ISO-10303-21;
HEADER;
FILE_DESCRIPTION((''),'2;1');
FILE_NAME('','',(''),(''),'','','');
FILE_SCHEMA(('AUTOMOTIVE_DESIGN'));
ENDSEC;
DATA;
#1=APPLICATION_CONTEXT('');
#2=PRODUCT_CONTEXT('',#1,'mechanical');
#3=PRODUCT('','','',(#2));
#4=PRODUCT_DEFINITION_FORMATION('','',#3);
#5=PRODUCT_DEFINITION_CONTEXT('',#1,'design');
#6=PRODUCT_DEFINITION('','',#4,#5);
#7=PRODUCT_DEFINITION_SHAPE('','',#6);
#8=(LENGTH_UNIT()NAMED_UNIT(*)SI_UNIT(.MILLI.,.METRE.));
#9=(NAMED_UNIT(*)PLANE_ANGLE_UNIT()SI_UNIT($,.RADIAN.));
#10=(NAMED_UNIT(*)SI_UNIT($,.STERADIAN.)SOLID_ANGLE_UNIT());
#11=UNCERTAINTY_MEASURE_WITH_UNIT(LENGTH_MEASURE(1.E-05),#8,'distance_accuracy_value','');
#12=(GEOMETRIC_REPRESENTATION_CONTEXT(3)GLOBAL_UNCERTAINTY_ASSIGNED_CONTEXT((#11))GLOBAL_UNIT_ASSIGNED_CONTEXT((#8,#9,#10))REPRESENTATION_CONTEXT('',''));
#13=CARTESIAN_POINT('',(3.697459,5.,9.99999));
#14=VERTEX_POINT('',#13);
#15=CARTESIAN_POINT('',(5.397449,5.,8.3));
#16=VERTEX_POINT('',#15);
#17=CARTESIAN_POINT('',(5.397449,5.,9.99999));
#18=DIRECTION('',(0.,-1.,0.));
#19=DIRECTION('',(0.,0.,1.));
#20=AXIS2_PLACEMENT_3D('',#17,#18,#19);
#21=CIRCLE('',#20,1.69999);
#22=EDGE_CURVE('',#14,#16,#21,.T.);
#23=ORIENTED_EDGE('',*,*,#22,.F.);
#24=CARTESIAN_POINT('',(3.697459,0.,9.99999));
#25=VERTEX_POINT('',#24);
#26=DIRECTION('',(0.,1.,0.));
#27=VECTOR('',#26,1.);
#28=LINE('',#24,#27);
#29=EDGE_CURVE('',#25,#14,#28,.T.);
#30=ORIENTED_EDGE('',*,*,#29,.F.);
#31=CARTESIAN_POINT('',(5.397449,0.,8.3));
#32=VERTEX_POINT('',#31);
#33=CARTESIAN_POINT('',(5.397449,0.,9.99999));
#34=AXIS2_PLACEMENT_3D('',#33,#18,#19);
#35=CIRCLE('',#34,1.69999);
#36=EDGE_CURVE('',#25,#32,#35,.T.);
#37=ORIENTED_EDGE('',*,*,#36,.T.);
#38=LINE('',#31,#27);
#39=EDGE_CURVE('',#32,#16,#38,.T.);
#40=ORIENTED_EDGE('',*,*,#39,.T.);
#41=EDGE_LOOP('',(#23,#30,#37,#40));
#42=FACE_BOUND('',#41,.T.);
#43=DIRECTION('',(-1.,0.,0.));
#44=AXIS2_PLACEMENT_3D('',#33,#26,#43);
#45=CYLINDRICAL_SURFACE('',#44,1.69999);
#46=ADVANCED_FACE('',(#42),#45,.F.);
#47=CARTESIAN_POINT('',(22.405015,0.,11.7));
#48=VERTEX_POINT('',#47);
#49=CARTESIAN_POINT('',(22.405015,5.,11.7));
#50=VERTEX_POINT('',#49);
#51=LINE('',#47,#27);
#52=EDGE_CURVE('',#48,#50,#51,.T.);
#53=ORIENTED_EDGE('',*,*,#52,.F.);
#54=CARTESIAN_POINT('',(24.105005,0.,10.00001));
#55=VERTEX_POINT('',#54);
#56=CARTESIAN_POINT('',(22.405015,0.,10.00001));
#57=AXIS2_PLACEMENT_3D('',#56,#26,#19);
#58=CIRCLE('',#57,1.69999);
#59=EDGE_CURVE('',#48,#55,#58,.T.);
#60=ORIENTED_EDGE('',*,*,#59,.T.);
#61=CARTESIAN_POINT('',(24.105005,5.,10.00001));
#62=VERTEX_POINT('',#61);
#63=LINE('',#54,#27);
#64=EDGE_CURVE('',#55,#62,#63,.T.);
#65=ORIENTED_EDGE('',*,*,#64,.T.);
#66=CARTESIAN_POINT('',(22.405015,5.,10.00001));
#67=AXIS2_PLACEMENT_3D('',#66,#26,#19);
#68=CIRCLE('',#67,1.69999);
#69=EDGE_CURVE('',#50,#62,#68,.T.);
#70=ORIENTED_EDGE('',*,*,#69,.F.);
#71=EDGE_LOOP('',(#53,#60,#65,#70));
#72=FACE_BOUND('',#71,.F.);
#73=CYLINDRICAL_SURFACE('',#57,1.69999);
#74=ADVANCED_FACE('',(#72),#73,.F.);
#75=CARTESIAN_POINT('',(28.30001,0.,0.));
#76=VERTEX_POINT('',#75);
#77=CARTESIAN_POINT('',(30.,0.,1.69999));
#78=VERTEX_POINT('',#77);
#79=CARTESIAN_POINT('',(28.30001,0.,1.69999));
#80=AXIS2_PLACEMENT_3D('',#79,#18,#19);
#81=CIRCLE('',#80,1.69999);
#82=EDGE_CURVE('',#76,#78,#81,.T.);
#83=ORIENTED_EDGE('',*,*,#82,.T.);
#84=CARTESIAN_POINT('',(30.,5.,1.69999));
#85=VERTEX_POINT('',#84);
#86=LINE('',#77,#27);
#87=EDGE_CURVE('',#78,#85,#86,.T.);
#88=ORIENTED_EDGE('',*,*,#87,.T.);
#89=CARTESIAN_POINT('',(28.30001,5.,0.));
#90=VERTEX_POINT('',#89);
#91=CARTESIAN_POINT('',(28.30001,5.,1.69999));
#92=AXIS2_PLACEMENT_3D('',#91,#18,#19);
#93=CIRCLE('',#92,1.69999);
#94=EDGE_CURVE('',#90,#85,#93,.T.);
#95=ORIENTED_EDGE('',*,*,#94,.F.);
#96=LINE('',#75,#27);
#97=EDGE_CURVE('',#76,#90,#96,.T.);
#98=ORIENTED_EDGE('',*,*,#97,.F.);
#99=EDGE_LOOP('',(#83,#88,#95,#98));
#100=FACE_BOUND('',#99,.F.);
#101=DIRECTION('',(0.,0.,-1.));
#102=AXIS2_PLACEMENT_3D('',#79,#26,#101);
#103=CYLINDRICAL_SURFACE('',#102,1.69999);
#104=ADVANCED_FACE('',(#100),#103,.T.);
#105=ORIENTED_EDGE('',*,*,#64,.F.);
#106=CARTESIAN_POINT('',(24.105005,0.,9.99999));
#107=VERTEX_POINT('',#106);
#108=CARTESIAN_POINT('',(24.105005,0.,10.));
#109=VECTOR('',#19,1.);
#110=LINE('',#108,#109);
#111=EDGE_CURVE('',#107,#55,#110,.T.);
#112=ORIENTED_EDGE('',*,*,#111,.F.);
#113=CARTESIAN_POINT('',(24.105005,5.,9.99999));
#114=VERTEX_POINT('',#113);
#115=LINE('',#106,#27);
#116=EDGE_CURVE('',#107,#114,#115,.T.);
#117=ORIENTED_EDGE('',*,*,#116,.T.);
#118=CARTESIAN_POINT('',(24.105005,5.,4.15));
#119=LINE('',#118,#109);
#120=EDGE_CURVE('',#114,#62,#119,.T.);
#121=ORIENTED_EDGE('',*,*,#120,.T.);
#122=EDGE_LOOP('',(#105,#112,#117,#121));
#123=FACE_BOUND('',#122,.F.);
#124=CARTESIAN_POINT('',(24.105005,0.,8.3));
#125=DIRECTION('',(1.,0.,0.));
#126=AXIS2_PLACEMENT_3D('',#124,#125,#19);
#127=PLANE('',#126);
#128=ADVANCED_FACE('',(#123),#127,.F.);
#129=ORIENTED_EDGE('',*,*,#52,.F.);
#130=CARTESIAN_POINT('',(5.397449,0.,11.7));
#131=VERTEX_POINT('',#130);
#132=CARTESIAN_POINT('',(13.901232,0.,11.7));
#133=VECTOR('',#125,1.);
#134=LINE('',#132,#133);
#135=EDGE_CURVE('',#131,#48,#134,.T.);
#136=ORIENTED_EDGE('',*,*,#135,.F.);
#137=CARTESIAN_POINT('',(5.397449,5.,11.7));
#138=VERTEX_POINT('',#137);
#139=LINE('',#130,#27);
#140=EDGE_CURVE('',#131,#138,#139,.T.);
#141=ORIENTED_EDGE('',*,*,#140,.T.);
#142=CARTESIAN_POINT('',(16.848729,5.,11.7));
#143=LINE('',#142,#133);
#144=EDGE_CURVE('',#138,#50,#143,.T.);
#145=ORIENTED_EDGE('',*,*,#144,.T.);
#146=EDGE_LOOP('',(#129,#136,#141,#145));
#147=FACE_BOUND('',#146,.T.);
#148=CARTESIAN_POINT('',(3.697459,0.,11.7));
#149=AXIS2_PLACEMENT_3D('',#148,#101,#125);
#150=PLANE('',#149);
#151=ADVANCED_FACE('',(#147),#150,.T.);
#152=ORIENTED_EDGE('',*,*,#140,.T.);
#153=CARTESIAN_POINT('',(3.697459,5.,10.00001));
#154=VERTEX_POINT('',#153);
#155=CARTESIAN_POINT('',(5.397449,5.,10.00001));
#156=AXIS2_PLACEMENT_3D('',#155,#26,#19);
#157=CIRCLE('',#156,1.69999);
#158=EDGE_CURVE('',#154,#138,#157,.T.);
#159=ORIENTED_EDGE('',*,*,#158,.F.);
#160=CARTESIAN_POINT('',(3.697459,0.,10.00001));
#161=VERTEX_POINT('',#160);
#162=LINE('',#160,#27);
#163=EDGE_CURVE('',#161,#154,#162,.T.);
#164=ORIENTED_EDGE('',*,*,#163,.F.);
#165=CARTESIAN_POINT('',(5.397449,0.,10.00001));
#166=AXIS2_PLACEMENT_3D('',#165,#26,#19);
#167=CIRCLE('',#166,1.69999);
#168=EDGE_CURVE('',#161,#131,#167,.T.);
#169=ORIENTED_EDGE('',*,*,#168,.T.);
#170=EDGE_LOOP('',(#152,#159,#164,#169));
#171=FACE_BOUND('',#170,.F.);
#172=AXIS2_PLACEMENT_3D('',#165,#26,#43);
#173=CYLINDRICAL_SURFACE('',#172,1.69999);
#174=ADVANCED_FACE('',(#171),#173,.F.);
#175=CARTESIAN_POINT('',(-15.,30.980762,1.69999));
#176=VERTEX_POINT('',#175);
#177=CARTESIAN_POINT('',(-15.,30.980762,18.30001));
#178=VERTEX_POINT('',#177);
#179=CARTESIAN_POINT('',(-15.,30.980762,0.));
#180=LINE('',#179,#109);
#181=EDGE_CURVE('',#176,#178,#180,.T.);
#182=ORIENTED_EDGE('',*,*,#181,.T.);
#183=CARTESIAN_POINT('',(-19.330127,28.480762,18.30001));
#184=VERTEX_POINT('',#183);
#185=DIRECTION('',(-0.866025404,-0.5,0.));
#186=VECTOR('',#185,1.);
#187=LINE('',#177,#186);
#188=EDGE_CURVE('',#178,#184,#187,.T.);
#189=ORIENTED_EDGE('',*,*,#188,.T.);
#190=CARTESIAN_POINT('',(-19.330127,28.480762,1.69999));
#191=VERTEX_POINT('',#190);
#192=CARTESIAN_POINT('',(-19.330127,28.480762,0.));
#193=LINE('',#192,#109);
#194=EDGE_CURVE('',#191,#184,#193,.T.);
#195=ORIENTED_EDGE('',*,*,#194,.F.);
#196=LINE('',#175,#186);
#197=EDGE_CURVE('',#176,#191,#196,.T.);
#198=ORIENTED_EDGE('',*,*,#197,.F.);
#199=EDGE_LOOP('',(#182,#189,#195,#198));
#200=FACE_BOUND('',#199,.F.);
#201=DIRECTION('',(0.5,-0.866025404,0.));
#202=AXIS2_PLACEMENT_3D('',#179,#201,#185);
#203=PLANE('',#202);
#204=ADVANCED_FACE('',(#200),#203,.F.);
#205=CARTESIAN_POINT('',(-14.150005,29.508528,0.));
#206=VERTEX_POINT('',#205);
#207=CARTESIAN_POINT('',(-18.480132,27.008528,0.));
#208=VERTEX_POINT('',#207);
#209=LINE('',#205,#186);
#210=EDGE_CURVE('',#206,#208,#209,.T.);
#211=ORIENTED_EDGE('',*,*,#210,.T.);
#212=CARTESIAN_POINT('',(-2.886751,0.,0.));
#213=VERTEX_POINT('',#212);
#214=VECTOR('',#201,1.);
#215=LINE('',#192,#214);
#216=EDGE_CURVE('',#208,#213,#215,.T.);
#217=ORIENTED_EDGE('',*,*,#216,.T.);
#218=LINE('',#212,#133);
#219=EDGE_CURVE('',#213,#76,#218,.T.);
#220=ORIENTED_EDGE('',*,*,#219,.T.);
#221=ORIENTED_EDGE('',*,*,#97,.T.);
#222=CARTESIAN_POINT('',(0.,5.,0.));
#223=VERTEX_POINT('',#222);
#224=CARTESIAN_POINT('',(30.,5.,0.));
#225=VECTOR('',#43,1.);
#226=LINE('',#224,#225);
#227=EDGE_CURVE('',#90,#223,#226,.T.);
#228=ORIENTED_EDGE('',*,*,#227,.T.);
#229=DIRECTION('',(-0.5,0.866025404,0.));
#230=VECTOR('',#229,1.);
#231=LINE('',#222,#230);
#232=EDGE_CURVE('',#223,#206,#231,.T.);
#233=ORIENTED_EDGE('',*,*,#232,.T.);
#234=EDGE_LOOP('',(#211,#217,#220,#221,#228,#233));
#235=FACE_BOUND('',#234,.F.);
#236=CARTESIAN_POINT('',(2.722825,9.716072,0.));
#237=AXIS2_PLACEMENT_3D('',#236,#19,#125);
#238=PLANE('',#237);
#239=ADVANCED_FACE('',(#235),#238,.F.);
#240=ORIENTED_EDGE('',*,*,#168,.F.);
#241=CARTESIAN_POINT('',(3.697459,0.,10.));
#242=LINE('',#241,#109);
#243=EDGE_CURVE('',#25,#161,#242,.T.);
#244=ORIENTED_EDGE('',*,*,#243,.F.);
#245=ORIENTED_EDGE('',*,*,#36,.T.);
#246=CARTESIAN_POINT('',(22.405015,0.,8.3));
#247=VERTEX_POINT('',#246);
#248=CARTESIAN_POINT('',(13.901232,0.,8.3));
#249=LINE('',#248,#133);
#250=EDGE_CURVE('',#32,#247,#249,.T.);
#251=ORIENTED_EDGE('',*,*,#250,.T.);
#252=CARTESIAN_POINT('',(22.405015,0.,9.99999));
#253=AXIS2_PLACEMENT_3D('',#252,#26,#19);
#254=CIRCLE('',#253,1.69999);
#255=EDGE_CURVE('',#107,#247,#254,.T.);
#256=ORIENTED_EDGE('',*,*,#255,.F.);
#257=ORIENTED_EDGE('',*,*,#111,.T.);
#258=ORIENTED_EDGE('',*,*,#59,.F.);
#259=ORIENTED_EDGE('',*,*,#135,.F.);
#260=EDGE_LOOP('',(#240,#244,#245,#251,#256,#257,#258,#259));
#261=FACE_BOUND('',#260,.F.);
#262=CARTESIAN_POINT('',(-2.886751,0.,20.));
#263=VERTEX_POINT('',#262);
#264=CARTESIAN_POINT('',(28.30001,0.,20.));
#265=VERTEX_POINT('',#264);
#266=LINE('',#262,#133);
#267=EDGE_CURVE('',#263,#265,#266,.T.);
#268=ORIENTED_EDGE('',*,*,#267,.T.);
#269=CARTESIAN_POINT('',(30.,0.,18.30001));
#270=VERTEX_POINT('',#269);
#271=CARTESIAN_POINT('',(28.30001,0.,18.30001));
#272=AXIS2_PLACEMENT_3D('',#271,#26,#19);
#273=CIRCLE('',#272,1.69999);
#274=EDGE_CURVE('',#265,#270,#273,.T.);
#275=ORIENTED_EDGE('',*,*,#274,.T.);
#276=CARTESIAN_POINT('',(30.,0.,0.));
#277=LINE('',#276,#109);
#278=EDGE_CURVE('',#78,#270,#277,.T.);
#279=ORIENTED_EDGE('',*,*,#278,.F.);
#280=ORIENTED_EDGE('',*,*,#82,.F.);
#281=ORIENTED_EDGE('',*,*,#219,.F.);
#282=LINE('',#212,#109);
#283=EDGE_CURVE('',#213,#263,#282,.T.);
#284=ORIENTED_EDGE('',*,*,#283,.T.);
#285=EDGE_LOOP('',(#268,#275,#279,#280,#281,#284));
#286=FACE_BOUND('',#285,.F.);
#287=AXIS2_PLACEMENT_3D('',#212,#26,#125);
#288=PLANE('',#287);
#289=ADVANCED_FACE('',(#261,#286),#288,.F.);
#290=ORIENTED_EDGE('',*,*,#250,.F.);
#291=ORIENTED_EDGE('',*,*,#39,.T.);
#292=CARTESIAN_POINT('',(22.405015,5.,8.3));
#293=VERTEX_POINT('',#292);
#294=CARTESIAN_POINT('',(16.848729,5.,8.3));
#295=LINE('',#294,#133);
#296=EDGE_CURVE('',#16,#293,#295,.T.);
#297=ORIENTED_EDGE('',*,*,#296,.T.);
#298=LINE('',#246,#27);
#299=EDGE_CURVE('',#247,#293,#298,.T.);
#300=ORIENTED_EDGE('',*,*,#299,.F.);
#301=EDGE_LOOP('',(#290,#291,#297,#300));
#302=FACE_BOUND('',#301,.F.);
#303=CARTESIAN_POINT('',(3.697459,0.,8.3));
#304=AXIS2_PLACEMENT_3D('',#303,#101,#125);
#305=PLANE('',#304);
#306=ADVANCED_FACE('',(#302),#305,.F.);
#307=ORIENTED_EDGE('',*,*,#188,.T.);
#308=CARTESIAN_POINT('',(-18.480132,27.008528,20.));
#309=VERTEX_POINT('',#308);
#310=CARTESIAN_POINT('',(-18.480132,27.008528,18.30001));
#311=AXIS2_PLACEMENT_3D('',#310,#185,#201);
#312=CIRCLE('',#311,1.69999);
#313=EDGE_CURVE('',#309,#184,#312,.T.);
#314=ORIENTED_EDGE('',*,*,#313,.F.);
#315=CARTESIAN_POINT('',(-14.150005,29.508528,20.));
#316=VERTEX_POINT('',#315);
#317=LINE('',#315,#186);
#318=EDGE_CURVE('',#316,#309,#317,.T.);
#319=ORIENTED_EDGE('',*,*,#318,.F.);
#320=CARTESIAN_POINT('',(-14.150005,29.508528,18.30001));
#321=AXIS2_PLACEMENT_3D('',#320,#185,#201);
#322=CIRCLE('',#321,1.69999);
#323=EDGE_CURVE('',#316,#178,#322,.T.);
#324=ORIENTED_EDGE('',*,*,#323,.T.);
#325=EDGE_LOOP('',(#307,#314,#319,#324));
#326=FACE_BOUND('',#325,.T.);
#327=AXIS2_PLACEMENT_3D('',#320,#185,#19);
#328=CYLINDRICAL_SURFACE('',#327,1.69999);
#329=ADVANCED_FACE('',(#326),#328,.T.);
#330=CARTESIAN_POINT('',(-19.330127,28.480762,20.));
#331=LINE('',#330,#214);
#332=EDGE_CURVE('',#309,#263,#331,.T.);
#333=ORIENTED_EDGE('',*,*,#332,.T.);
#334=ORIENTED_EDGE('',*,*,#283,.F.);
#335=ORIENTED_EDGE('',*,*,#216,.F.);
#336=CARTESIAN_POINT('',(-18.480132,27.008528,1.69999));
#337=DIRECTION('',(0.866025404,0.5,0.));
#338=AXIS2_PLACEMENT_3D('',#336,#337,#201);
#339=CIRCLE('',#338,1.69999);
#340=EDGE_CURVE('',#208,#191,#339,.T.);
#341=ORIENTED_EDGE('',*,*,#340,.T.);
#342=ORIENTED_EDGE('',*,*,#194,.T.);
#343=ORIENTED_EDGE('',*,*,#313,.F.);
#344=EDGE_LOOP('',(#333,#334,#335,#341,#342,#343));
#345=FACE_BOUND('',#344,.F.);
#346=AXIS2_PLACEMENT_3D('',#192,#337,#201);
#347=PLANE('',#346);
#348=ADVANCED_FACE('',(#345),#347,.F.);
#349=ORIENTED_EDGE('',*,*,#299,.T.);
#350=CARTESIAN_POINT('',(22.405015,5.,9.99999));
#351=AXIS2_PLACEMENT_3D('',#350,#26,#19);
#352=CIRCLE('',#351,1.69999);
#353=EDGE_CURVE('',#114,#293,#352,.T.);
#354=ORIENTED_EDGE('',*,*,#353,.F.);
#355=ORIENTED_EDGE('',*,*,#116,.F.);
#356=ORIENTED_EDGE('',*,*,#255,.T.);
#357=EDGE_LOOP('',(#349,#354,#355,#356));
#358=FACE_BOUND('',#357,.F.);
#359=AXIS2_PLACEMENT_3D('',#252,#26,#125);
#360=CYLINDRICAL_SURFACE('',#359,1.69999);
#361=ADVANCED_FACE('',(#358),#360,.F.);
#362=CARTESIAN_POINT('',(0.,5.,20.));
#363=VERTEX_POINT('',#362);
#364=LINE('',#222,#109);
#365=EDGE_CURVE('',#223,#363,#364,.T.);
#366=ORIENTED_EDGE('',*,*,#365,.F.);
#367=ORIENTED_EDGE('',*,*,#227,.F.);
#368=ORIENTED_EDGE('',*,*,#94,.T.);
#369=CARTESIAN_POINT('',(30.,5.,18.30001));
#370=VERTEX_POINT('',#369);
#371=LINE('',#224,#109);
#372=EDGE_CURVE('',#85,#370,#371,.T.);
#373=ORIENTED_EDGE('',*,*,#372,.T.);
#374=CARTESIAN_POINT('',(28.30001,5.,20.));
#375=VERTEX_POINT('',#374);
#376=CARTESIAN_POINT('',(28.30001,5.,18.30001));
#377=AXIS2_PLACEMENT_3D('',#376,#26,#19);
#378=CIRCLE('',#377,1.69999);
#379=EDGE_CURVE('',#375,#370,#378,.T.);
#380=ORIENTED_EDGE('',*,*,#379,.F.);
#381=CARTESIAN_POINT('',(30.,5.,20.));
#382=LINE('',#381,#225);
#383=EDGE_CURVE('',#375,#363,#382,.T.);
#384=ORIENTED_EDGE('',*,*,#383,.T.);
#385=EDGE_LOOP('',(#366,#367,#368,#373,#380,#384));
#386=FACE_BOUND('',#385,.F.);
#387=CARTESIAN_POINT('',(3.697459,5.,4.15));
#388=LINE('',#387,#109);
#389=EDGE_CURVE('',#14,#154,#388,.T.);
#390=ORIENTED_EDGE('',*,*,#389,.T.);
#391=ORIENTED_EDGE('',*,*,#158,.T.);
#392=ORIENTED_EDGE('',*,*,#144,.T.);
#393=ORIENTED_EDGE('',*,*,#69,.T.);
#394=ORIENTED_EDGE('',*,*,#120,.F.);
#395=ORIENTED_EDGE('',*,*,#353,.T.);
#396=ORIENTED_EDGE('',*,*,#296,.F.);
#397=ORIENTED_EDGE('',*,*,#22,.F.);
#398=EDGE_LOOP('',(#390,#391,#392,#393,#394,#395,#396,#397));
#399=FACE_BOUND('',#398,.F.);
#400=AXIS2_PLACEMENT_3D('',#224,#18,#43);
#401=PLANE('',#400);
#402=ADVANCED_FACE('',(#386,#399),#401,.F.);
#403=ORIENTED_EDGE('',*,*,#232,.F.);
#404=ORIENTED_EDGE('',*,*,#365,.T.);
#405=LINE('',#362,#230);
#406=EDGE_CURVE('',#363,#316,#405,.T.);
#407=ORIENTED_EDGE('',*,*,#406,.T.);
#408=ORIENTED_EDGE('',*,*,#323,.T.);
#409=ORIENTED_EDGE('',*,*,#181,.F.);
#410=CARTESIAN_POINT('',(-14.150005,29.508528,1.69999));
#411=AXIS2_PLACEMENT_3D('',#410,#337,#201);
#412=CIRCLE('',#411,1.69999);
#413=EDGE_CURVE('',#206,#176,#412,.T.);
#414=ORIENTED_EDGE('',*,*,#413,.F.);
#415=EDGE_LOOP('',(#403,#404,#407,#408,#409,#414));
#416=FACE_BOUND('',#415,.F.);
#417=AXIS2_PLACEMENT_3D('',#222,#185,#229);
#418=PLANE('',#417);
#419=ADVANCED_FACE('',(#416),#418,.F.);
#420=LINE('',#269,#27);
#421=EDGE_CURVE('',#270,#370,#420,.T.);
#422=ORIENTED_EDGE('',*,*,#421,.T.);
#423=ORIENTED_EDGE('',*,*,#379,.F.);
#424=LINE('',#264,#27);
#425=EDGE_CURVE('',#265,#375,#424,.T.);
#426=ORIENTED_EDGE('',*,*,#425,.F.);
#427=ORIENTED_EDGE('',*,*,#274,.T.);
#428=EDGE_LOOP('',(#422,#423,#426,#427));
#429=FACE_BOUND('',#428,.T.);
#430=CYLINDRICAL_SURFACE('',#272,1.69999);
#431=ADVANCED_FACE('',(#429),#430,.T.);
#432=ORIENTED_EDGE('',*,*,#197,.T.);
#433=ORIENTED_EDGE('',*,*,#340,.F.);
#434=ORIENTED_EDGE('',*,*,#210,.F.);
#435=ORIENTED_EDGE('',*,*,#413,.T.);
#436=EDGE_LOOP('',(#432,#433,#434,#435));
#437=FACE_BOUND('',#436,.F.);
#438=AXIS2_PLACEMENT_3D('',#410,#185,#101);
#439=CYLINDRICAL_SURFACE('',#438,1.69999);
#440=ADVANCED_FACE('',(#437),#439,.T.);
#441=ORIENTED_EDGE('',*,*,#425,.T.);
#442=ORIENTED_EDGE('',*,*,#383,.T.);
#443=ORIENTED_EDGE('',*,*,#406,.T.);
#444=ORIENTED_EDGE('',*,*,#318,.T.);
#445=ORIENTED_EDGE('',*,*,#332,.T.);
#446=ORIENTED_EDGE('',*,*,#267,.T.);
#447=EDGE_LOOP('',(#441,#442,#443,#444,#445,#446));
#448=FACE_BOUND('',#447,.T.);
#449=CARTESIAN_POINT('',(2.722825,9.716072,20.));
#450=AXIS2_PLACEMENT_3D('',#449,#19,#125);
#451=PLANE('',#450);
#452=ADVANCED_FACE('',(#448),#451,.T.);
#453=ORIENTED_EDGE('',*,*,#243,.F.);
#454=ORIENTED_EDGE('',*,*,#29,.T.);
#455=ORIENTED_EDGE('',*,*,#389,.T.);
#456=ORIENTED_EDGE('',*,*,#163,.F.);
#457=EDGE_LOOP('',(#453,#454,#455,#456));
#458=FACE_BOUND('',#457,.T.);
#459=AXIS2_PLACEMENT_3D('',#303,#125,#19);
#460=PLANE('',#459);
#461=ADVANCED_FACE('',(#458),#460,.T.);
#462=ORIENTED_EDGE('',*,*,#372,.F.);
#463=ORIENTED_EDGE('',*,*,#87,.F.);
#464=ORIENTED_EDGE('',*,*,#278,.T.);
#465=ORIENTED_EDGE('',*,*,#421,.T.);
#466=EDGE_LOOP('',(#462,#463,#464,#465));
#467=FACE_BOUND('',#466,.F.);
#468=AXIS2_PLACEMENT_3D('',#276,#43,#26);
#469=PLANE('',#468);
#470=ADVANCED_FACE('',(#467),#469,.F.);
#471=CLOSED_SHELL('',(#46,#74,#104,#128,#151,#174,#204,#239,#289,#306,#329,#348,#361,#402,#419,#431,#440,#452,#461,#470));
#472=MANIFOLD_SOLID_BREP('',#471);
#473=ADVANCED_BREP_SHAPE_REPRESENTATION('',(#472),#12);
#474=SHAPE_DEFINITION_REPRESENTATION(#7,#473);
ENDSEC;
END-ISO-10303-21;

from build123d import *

# Parameters (mm, degrees)
F1_DEPTH = 20
F2_W     = 20.4075463116
F2_H     = 3.4
F3_DEPTH = 25
F4_R     = 1.69999


# Not quite as in the source:
# - a fillet or chamfer is up to 0.001 mm smaller than in the source, because OpenCascade refuses the exact size


with BuildPart() as f1:
    # F0 (on Top) → F1 (new body)
    with BuildSketch(Plane.XY):
        Polygon((-2.8867513459, 0), (0, 0), (30, 0), (30, 5), (0, 5), (-15, 30.9807621135), (-19.3301270189, 28.4807621135), align=None)
    extrude(amount=F1_DEPTH)

    # F2 (on face) → F3 (cut)
    with BuildSketch(Plane.XZ):
        with Locations((13.9012318105, 10)):
            Rectangle(F2_W, F2_H)
    extrude(amount=-F3_DEPTH, mode=Mode.SUBTRACT)

    # F4 (radius 1.7 in the source; OpenCascade refuses exactly that, so slightly less here)
    f4_edges = [f1.edges().sort_by_distance(p)[0] for p in [
        (3.697459, 2.5, 8.3),
        (3.697459, 2.5, 11.7),
        (24.105005, 2.5, 11.7),
        (24.105005, 2.5, 8.3),
        (30, 2.5, 20),
        (30, 2.5, 0),
        (-17.165064, 29.730762, 20),
        (-17.165064, 29.730762, 0),
    ]]
    fillet(f4_edges, radius=F4_R)


solid = f1.part
